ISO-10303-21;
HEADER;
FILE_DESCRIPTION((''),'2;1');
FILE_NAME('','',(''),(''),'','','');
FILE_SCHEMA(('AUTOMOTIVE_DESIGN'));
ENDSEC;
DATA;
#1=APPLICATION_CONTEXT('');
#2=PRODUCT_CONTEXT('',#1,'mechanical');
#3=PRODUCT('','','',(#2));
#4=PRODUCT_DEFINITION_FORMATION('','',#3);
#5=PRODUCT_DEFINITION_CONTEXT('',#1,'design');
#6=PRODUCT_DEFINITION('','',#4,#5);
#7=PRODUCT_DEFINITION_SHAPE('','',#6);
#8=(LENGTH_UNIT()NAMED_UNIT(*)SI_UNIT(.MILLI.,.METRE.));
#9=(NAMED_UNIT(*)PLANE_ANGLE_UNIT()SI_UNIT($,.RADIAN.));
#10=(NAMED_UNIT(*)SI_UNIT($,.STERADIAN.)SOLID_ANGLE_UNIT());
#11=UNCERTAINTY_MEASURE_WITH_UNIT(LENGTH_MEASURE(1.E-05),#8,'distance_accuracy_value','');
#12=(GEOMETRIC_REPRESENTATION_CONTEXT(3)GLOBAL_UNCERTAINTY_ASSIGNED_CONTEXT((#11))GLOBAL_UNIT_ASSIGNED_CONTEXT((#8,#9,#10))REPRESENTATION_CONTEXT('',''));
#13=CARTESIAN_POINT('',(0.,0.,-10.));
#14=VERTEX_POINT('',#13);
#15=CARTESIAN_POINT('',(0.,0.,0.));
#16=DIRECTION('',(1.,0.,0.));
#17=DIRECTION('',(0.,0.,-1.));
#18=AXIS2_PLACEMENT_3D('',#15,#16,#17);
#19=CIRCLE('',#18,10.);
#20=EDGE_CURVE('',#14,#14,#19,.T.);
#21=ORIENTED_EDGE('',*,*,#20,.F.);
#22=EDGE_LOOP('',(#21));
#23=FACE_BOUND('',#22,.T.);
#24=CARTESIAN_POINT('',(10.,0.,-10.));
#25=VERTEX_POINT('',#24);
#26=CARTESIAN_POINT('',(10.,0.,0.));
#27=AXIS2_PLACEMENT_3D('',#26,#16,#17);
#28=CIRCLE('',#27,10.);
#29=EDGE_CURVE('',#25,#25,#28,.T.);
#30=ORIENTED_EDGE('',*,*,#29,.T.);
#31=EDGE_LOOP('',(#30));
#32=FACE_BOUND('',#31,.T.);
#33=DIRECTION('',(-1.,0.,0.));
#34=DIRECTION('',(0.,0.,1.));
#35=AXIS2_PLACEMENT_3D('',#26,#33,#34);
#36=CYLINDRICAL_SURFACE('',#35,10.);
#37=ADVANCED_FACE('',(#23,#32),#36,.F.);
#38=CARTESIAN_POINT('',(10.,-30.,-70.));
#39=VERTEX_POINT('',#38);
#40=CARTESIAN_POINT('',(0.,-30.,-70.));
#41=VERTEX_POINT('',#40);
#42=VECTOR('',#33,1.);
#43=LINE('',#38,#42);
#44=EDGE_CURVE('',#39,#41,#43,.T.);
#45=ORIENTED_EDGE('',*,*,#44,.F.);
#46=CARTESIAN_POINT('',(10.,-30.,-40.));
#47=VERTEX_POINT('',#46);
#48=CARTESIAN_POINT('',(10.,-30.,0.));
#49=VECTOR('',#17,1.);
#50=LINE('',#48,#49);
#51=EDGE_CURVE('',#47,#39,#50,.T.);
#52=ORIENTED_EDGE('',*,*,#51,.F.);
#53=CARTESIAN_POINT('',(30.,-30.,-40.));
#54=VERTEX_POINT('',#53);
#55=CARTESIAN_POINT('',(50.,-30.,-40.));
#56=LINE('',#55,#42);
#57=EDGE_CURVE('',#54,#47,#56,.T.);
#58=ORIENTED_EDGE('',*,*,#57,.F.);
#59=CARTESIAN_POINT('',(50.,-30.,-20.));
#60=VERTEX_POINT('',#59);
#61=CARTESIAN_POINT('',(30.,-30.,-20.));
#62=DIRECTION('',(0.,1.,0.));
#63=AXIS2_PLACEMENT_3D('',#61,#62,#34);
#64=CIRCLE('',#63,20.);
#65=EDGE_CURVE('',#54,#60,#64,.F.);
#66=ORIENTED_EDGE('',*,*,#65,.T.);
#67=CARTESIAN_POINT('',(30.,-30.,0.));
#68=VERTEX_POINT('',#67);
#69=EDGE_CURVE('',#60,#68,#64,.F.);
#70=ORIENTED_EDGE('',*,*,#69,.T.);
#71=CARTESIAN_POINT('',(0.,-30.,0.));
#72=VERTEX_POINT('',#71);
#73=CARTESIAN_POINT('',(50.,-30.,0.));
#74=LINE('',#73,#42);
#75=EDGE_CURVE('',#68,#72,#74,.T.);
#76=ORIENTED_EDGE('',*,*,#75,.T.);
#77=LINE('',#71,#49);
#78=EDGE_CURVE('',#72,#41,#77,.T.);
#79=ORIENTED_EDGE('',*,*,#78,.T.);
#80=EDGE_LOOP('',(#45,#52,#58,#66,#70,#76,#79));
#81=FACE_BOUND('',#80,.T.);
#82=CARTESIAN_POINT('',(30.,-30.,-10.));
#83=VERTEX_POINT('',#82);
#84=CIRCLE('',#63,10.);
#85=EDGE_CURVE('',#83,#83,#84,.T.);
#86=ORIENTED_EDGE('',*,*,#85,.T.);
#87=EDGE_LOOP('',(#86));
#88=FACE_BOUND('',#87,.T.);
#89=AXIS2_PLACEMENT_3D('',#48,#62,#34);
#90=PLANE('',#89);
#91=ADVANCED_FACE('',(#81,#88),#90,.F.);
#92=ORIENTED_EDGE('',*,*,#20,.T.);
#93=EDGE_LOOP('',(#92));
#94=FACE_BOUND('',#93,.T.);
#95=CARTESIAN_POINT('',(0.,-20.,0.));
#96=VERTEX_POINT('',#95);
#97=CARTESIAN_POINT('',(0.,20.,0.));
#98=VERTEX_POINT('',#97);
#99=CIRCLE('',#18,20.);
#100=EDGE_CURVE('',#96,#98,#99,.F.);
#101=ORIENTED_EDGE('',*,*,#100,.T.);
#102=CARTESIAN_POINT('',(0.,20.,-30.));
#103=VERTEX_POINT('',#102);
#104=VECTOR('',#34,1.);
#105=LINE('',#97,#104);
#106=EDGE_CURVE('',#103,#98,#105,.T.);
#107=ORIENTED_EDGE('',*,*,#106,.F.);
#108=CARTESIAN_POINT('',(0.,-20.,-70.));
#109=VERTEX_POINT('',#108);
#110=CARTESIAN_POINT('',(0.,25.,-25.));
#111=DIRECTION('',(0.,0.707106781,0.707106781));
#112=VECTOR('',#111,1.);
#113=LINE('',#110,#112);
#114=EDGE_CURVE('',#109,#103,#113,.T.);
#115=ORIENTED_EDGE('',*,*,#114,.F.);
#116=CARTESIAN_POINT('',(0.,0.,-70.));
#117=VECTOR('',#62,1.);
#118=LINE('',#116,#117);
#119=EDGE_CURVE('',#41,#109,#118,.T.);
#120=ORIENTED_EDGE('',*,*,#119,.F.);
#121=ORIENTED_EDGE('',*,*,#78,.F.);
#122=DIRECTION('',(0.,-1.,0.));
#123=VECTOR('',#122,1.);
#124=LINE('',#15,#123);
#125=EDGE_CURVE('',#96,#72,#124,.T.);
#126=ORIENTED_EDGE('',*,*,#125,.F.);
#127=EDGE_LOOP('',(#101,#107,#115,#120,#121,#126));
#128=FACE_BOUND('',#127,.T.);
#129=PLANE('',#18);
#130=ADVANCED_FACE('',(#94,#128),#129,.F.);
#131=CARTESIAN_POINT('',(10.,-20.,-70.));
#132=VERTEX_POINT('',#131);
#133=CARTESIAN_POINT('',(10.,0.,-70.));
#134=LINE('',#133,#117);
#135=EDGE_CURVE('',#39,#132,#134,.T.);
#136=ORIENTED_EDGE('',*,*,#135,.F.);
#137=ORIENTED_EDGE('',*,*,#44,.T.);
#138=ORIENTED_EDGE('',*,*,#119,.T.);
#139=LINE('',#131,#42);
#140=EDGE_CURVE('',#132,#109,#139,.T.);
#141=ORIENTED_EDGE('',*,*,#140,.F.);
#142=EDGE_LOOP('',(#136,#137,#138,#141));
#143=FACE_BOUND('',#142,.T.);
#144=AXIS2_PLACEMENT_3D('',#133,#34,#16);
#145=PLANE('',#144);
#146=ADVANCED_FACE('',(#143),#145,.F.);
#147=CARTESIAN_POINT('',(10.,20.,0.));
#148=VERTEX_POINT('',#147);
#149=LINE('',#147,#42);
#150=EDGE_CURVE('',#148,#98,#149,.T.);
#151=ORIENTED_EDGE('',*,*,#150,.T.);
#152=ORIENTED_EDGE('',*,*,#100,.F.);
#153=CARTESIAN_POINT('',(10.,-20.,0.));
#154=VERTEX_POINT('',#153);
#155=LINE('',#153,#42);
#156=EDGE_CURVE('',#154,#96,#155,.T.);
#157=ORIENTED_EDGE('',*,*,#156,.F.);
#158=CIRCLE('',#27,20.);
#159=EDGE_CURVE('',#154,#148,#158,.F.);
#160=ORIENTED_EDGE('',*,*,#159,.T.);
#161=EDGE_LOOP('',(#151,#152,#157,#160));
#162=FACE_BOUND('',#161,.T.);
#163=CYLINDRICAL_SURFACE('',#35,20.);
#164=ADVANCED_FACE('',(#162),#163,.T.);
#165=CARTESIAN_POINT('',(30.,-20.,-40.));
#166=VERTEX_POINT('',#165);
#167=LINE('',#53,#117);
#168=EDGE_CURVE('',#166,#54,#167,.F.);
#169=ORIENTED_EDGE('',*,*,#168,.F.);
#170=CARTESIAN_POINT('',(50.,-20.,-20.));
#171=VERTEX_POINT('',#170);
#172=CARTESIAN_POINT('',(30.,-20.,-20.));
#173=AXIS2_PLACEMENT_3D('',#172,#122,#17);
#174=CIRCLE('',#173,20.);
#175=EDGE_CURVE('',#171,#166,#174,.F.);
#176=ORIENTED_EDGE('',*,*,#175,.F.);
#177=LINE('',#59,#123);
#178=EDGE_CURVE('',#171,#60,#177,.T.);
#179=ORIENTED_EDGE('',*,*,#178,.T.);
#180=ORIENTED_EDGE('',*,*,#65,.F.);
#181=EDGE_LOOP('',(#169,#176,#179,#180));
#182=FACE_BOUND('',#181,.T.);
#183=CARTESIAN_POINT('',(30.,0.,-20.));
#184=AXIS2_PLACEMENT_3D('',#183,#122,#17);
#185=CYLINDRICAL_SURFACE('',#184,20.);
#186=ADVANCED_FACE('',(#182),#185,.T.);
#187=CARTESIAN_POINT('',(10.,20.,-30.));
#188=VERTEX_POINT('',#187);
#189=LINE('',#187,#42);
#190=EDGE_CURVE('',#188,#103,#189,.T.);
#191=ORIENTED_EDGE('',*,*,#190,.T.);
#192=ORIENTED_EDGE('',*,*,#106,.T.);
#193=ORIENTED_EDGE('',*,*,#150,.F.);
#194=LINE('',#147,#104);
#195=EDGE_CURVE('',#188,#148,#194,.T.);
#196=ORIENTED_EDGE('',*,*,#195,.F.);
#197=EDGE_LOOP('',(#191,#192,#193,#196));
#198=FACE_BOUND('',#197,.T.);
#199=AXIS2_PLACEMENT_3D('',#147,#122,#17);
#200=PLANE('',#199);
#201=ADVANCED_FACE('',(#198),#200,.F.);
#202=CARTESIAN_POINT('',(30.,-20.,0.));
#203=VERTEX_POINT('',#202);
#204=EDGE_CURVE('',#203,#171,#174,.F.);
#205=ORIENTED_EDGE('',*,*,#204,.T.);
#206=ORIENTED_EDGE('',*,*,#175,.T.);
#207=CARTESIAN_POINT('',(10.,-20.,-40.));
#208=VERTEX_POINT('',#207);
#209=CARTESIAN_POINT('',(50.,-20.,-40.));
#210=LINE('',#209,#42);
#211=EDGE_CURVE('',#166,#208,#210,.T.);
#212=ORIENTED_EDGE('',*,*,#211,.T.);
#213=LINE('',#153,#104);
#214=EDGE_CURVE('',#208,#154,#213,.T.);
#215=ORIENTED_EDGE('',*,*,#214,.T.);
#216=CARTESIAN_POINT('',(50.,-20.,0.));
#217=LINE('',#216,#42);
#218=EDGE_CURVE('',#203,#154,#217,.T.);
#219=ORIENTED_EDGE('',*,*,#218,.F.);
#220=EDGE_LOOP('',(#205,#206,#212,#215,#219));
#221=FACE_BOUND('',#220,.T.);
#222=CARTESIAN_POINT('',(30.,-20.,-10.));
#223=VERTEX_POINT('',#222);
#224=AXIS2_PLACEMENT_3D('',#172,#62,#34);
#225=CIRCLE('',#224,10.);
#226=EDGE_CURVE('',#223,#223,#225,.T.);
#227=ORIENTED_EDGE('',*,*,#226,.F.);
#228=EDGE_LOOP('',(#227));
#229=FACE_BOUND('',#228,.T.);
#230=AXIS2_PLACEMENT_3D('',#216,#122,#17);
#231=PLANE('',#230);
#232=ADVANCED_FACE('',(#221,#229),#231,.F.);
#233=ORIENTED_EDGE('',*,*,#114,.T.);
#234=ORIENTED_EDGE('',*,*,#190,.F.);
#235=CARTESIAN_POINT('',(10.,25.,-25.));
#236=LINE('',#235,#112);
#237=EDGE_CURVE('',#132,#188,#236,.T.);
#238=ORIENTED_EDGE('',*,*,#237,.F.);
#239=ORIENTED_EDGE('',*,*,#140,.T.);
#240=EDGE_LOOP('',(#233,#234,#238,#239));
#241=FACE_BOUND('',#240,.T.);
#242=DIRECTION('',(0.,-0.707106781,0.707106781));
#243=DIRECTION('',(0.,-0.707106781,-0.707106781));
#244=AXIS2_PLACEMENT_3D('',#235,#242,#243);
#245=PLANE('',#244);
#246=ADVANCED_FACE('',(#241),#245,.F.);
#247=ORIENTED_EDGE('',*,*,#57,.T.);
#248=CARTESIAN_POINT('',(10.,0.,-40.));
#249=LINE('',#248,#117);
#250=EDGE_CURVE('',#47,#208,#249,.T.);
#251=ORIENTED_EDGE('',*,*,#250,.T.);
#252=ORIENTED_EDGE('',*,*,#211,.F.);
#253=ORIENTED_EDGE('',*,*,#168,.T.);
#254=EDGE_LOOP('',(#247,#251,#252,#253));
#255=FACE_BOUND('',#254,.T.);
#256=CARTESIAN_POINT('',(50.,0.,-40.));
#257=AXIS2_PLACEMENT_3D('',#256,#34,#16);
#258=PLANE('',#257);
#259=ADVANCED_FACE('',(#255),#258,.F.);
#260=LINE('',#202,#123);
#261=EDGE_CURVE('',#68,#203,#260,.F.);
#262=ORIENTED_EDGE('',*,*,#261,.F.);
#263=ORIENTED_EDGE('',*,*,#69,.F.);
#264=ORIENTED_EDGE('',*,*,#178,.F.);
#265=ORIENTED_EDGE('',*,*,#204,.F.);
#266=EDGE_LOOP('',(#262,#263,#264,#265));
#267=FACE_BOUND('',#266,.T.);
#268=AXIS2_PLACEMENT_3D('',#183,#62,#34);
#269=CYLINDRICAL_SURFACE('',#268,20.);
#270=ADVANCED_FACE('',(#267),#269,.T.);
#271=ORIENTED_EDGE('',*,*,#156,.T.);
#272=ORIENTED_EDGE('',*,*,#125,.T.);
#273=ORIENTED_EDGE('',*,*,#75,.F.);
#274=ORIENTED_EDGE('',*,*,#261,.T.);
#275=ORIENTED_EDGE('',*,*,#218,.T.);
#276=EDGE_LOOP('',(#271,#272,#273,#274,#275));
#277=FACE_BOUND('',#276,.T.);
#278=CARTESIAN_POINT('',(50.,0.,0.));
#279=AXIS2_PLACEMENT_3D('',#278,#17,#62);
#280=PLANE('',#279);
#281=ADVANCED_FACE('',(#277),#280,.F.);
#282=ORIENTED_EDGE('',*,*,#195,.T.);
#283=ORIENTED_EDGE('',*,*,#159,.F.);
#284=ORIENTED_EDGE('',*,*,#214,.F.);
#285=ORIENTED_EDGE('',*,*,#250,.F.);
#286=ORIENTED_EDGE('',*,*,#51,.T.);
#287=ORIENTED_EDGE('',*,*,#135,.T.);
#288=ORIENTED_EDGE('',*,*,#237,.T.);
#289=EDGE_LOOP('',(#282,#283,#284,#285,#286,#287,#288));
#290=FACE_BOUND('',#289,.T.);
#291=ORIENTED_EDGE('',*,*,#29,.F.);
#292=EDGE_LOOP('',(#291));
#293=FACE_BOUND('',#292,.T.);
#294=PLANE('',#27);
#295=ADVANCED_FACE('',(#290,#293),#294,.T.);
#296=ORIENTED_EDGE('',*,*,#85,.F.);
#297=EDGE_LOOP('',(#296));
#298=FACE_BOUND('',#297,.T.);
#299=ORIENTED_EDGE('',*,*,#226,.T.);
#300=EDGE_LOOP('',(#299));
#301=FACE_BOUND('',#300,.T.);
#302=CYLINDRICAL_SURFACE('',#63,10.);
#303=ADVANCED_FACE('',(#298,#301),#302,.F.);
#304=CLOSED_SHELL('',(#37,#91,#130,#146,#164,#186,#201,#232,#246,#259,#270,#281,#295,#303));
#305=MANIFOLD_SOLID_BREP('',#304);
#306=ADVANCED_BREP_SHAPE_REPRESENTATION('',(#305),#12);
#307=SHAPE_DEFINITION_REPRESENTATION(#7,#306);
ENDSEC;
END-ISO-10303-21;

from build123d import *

# Parameters (mm, degrees)
SKETCH1_R           = 10
BOSS_EXTRUDE1_DEPTH = 10
SKETCH1_3_W         = 40
SKETCH1_3_H         = 10
BOSS_EXTRUDE2_DEPTH = 50
FILLET1_R           = 20
SKETCH2_R           = 10
CUT_EXTRUDE1_DEPTH  = 10


with BuildPart() as part:
    # Sketch1 → Boss-Extrude1 (new body)
    with BuildSketch(Plane(origin=(0, 0, 0), x_dir=(0, 0, -1), z_dir=(1, 0, 0))):
        with BuildLine():
            ThreePointArc((0, 20), (-20, 0), (0, -20))
            Line((0, -20), (40, -20))
            Line((40, -20), (40, -30))
            Line((40, -30), (70, -30))
            Line((70, -30), (70, -20))
            Line((70, -20), (30, 20))
            Line((30, 20), (0, 20))
        make_face()
        Circle(SKETCH1_R, mode=Mode.SUBTRACT)
    extrude(amount=BOSS_EXTRUDE1_DEPTH)

    # Sketch1<3> → Boss-Extrude2 (add)
    with BuildSketch(Plane(origin=(0, 0, 0), x_dir=(0, 0, -1), z_dir=(1, 0, 0))):
        with Locations((20, -25)):
            Rectangle(SKETCH1_3_W, SKETCH1_3_H)
    extrude(amount=BOSS_EXTRUDE2_DEPTH)

    # Fillet1
    fillet1_edges = [part.edges().sort_by_distance(p)[0] for p in [
        (50, -25, -40),
        (50, -25, 0),
    ]]
    fillet(fillet1_edges, radius=FILLET1_R - 0.0001)  # a hair under: the kernel refuses the full size

    # Sketch2 → Cut-Extrude1 (cut)
    with BuildSketch(Plane(origin=(0, -20, 0), x_dir=(1, 0, 0), z_dir=(0, 1, 0))):
        with Locations(Location((30, 20, 0), (0, 0, 270))):
            Circle(SKETCH2_R)
    extrude(amount=-CUT_EXTRUDE1_DEPTH, mode=Mode.SUBTRACT)


solid = part.part
